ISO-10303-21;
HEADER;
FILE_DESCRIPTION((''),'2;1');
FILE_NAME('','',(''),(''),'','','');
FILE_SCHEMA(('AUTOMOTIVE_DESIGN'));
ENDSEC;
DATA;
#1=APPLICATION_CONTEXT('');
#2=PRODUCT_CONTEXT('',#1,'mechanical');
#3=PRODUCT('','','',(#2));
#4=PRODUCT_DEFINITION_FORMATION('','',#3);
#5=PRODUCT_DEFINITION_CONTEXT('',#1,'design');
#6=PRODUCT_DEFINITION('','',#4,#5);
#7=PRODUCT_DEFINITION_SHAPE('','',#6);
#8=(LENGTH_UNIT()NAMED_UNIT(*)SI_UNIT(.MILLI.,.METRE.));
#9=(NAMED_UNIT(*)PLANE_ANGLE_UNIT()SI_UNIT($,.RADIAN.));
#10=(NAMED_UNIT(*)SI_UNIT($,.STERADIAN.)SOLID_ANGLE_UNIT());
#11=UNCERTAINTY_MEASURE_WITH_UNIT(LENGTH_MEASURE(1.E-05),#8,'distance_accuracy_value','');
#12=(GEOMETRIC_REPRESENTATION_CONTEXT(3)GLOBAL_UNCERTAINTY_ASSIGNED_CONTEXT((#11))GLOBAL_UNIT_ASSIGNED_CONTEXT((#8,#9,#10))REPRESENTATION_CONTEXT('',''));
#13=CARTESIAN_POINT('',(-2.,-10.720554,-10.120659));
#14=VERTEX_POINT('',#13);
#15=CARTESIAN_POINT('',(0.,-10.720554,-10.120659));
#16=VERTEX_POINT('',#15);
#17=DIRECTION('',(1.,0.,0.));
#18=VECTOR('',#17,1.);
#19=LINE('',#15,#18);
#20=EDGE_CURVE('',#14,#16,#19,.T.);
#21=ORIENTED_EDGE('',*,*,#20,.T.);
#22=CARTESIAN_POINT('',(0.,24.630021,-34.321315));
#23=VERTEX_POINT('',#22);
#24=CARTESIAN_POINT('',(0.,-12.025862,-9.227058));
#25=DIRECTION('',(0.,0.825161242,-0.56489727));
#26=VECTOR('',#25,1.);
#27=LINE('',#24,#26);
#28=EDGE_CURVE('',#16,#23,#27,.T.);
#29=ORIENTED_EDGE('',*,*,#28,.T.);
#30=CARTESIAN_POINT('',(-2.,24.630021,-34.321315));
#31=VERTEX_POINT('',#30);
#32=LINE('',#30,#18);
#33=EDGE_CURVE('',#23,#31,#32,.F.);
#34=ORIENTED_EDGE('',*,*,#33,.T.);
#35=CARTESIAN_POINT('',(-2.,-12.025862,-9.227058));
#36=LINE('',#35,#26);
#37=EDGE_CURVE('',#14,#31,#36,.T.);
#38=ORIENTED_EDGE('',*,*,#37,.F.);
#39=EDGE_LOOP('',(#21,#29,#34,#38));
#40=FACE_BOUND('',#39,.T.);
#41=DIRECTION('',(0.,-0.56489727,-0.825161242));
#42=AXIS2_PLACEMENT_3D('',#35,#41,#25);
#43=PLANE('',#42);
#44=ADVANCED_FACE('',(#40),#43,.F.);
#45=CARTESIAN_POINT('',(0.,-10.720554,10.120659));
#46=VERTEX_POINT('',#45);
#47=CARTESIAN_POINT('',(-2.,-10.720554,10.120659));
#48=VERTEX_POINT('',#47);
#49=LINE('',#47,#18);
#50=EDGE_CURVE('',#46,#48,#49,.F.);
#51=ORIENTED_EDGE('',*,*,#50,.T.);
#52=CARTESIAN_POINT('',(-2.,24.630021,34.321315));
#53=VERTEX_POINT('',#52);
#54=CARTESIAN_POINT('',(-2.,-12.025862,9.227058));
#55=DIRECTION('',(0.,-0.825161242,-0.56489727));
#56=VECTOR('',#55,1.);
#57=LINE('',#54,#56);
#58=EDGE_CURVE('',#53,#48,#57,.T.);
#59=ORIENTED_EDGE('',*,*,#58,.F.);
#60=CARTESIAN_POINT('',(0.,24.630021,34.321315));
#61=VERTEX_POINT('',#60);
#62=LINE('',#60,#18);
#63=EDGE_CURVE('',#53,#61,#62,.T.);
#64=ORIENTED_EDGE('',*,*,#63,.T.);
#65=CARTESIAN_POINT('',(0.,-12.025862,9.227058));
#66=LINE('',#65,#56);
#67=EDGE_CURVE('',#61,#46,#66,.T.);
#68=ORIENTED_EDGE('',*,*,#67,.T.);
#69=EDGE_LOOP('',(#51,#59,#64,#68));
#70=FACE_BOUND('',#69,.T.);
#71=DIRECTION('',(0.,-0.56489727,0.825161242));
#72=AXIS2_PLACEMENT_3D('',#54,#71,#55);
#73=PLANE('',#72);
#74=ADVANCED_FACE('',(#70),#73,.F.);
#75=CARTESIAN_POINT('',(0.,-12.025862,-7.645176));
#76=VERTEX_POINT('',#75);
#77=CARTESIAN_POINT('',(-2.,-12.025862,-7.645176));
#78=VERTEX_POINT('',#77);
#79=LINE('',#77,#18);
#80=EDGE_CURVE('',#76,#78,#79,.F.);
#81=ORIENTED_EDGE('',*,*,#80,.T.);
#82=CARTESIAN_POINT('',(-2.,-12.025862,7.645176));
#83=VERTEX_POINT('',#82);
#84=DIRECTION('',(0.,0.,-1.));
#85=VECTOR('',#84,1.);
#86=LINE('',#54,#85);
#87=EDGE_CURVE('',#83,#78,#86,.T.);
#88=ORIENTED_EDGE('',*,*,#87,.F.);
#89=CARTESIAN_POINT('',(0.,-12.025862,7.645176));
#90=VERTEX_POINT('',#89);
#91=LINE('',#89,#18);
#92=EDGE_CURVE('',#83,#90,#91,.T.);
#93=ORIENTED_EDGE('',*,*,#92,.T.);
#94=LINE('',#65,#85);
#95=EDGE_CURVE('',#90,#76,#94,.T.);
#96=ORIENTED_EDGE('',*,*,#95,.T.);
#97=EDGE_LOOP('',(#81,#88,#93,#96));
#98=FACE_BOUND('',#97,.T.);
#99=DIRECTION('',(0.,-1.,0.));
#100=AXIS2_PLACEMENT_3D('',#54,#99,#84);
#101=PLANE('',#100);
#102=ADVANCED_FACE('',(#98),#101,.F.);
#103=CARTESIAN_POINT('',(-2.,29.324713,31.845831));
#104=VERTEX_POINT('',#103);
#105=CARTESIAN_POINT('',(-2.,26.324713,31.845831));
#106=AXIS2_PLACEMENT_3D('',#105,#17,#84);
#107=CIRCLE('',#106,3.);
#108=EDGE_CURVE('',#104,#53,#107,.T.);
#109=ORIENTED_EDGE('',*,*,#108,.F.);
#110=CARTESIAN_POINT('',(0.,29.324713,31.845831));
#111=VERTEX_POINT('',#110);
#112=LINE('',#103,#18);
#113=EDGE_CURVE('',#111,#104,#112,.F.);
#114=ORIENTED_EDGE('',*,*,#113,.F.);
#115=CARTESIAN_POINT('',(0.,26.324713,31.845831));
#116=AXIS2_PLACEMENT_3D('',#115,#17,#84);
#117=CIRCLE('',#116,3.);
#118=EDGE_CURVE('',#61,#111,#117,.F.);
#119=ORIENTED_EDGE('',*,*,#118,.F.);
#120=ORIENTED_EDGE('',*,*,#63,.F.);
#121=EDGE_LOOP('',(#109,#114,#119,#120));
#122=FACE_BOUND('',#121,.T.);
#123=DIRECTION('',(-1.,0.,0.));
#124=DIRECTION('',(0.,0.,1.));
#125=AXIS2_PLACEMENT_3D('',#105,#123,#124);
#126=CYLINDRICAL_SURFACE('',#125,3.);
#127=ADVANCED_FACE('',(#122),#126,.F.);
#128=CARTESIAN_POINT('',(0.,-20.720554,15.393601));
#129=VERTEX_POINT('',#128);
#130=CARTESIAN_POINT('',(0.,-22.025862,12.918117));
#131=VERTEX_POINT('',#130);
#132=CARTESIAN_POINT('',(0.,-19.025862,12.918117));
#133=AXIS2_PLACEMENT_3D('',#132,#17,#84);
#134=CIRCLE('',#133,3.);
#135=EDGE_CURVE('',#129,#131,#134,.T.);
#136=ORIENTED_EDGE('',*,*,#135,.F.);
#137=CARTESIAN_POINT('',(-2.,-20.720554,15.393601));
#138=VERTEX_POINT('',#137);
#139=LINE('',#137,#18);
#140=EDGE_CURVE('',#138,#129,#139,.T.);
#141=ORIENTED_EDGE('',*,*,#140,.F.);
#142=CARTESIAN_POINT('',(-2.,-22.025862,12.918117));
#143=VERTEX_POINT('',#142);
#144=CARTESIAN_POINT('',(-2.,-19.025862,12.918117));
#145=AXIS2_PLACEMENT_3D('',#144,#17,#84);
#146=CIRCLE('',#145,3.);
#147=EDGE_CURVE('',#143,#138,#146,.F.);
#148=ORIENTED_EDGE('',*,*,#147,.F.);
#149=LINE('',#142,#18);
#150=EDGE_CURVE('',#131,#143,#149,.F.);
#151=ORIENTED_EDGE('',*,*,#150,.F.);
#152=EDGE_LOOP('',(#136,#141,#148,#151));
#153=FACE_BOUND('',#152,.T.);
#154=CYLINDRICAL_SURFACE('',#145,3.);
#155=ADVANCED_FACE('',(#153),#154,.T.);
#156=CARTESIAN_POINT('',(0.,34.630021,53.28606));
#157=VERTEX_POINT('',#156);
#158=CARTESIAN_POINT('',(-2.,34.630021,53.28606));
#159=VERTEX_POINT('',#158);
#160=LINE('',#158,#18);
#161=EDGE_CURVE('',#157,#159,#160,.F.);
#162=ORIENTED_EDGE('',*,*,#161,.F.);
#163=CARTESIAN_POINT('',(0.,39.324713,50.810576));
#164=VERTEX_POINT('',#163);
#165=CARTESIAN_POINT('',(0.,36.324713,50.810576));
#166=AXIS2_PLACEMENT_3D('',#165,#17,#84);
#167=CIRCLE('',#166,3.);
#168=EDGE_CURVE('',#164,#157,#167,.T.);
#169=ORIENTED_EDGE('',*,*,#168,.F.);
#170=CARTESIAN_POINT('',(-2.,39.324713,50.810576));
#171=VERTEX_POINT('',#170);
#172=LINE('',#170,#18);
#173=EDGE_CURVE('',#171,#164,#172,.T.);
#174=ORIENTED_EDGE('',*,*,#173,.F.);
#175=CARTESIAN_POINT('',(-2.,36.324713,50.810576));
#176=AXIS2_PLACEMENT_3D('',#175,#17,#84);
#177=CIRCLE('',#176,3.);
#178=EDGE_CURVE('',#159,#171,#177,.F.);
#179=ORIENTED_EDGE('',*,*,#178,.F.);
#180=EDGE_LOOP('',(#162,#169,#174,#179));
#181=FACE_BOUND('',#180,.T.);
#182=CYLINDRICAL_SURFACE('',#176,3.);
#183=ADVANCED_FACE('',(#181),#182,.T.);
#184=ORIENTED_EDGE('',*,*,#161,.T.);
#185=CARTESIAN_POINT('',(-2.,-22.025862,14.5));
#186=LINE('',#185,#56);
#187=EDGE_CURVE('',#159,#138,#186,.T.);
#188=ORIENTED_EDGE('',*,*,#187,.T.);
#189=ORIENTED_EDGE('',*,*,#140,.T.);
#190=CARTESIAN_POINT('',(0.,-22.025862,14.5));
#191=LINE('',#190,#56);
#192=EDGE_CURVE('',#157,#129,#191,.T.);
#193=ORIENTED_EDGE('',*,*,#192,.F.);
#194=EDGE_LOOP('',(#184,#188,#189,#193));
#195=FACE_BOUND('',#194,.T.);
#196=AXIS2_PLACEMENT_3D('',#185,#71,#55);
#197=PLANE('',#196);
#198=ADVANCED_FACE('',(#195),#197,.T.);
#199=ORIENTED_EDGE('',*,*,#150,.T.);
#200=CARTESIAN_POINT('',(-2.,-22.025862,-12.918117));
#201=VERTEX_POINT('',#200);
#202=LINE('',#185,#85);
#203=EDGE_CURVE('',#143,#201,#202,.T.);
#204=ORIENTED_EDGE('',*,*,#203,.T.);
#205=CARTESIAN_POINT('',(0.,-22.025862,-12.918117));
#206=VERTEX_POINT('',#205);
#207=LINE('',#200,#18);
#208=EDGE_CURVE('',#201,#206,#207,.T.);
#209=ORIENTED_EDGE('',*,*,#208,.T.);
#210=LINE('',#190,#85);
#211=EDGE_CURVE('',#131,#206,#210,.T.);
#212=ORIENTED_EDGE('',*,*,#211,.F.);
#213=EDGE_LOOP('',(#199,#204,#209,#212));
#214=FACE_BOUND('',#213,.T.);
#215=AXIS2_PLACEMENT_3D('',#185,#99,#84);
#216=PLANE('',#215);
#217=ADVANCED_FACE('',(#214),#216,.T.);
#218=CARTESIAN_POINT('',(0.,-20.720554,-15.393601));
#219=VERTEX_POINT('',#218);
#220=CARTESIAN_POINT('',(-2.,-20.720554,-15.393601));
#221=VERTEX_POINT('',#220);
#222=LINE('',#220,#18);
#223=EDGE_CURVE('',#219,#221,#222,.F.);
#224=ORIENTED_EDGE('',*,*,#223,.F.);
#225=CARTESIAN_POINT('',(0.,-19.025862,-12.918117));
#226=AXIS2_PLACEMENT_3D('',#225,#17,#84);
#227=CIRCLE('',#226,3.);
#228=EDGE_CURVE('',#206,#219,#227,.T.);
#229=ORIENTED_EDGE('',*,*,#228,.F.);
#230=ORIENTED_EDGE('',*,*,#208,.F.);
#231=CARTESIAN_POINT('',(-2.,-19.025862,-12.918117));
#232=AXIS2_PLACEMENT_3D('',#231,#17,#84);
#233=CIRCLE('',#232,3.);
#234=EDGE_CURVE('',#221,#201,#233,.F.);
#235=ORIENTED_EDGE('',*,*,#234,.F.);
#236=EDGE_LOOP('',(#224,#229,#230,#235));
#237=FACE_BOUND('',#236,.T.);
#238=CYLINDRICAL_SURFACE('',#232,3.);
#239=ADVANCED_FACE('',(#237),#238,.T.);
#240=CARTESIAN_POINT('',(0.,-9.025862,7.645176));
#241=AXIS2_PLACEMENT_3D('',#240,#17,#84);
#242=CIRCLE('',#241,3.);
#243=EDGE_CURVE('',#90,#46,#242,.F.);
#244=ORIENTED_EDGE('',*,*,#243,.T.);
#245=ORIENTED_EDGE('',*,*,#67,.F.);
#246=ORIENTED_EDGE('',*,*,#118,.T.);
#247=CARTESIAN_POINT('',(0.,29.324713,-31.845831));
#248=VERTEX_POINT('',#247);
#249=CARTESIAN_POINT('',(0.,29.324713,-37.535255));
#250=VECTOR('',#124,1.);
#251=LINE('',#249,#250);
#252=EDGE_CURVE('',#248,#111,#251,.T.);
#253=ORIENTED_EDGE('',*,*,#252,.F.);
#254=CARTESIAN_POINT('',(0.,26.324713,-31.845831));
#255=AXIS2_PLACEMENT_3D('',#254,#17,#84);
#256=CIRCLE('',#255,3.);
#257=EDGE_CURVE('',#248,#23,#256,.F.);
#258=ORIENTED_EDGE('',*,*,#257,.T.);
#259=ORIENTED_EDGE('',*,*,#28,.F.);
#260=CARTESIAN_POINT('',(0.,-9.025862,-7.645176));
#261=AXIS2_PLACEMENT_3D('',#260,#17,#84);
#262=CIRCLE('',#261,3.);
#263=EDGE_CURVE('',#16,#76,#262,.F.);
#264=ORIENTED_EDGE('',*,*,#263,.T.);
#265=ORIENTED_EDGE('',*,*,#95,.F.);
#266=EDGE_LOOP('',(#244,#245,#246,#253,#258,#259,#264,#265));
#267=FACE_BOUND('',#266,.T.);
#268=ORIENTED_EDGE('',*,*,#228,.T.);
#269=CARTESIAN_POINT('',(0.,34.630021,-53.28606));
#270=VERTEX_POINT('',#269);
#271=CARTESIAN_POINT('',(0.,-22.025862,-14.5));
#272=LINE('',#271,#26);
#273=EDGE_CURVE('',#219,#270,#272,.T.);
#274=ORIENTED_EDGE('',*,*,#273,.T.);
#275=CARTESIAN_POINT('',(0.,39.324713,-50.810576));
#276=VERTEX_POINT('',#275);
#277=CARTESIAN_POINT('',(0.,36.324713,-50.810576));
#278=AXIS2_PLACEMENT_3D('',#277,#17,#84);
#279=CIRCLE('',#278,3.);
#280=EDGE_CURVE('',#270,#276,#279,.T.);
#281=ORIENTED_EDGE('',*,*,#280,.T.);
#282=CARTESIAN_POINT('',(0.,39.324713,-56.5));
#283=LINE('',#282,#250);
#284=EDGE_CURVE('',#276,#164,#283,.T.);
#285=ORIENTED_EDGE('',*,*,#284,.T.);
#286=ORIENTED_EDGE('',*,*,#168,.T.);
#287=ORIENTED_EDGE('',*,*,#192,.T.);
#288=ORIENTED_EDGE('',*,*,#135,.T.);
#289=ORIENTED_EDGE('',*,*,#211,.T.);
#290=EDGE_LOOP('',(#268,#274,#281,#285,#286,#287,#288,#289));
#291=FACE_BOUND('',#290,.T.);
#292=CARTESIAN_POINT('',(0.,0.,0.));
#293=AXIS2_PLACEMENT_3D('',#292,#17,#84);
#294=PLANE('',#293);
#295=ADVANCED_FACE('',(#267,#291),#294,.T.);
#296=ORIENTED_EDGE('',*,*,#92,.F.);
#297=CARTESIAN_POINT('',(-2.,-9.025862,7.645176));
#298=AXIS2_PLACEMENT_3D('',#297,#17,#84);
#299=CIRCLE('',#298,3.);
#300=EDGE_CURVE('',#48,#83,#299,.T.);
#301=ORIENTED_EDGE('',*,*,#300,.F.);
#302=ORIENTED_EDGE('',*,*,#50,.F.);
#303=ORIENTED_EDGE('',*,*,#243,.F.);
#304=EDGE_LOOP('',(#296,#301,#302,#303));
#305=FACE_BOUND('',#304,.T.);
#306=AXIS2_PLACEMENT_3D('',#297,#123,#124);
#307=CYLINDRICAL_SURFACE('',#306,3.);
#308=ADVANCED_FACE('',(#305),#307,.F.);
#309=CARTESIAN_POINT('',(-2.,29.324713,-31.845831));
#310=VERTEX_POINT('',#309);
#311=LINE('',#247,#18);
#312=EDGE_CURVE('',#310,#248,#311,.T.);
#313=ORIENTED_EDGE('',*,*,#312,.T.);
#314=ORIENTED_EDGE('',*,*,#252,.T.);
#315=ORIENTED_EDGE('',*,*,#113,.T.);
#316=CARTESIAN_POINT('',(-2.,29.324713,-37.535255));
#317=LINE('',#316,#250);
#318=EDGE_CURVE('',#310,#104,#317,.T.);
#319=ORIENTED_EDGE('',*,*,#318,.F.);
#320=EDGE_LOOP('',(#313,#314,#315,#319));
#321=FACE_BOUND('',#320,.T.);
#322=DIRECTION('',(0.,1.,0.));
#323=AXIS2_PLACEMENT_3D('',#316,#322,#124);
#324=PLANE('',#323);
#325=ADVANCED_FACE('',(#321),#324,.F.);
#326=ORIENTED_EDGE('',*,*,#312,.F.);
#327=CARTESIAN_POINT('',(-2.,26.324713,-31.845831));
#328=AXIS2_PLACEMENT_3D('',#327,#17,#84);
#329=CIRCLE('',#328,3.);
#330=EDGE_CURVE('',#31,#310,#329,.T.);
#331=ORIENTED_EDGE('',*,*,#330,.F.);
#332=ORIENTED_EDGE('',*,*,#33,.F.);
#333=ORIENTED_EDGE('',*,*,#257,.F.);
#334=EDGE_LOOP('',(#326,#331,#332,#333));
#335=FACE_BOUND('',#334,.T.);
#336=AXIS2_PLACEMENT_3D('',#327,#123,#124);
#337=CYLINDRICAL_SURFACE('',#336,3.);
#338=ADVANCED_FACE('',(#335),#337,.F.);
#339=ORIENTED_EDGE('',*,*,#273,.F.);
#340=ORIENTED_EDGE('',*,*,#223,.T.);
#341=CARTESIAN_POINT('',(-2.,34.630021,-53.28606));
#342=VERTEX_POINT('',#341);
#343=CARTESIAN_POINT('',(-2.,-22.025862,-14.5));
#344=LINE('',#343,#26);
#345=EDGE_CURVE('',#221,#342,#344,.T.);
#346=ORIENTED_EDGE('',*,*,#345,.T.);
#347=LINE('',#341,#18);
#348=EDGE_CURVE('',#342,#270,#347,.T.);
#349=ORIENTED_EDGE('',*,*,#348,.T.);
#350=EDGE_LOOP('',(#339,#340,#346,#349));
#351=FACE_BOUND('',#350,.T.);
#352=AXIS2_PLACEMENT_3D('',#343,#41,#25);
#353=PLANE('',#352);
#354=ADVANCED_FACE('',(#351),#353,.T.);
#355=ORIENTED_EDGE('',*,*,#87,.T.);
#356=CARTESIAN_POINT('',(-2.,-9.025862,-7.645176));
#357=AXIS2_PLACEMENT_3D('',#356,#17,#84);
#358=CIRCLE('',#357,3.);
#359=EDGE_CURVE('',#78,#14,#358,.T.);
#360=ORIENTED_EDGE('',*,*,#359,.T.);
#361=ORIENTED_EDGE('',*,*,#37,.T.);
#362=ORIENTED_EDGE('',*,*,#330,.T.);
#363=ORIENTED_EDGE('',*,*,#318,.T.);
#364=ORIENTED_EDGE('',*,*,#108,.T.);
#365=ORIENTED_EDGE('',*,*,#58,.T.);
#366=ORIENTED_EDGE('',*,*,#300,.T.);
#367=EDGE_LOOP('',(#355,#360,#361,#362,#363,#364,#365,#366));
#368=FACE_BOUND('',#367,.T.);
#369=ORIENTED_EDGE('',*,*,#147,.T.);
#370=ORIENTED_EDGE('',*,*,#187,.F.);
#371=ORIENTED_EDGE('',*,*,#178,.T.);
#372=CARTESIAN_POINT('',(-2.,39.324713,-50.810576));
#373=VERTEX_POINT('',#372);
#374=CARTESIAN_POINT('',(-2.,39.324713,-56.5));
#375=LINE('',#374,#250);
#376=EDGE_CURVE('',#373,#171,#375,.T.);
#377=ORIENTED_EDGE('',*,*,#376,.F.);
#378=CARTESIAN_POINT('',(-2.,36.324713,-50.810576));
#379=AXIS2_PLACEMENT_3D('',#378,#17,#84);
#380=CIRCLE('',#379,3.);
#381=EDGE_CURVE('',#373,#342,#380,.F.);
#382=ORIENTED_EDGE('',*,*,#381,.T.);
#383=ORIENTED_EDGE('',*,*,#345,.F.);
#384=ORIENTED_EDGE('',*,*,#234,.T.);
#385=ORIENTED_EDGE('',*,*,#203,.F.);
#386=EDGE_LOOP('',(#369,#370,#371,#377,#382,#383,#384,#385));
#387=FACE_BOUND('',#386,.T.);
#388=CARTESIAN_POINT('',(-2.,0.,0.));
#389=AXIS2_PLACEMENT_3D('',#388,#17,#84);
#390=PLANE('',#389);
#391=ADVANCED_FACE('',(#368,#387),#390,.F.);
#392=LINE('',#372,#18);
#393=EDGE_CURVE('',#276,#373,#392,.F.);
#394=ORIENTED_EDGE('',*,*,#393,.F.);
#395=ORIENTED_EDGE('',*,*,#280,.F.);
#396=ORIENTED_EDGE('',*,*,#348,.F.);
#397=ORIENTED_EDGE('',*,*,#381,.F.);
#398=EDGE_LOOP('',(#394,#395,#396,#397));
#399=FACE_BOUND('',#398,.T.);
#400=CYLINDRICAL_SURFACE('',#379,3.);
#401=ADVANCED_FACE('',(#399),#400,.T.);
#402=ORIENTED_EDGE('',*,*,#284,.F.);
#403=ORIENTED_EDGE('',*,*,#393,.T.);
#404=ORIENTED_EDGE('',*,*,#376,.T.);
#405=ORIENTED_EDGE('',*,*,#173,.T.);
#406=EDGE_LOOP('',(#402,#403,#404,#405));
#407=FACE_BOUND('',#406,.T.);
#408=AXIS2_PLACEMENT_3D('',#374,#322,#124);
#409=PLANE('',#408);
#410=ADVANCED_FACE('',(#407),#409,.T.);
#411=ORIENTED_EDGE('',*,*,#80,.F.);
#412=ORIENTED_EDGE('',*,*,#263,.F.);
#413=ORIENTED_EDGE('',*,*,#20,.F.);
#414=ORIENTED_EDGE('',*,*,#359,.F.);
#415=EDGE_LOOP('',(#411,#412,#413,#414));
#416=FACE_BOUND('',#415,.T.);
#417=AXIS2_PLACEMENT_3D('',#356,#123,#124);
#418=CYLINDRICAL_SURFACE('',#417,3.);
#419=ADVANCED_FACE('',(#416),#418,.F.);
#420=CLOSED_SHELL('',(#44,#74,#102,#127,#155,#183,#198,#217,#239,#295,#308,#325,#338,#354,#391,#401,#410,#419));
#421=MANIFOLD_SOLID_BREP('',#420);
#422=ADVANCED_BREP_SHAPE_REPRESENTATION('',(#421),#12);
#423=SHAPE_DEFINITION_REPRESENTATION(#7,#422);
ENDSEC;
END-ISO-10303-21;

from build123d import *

# Parameters (mm, degrees)
BASE_FLANGE1_DEPTH = 2
FILLET1_R          = 3


# Sheet-metal steps are written as plain solids
with BuildPart() as part:
    # Sketch1 → Base-Flange1 (new body)
    with BuildSketch(Plane(origin=(0, 0, 0), x_dir=(0, 0, -1), z_dir=(1, 0, 0))):
        Polygon((-14.5, -22.025862069), (14.5, -22.025862069), (56.5, 39.324712644), (-56.5, 39.324712644), align=None)
        Polygon((-9.227058078, -12.025862069), (9.227058078, -12.025862069), (37.5352548, 29.324712644), (-37.5352548, 29.324712644), align=None, mode=Mode.SUBTRACT)
    extrude(amount=-BASE_FLANGE1_DEPTH)

    # Fillet1
    fillet1_edges = [part.edges().sort_by_distance(p)[0] for p in [
        (-1, 29.324712644, -37.5352548),
        (-1, -12.025862069, -9.227058078),
        (-1, -12.025862069, 9.227058078),
        (-1, 29.324712644, 37.5352548),
        (-1, -22.025862069, -14.5),
        (-1, -22.025862069, 14.5),
        (-1, 39.324712644, 56.5),
        (-1, 39.324712644, -56.5),
    ]]
    fillet(fillet1_edges, radius=FILLET1_R)


solid = part.part
